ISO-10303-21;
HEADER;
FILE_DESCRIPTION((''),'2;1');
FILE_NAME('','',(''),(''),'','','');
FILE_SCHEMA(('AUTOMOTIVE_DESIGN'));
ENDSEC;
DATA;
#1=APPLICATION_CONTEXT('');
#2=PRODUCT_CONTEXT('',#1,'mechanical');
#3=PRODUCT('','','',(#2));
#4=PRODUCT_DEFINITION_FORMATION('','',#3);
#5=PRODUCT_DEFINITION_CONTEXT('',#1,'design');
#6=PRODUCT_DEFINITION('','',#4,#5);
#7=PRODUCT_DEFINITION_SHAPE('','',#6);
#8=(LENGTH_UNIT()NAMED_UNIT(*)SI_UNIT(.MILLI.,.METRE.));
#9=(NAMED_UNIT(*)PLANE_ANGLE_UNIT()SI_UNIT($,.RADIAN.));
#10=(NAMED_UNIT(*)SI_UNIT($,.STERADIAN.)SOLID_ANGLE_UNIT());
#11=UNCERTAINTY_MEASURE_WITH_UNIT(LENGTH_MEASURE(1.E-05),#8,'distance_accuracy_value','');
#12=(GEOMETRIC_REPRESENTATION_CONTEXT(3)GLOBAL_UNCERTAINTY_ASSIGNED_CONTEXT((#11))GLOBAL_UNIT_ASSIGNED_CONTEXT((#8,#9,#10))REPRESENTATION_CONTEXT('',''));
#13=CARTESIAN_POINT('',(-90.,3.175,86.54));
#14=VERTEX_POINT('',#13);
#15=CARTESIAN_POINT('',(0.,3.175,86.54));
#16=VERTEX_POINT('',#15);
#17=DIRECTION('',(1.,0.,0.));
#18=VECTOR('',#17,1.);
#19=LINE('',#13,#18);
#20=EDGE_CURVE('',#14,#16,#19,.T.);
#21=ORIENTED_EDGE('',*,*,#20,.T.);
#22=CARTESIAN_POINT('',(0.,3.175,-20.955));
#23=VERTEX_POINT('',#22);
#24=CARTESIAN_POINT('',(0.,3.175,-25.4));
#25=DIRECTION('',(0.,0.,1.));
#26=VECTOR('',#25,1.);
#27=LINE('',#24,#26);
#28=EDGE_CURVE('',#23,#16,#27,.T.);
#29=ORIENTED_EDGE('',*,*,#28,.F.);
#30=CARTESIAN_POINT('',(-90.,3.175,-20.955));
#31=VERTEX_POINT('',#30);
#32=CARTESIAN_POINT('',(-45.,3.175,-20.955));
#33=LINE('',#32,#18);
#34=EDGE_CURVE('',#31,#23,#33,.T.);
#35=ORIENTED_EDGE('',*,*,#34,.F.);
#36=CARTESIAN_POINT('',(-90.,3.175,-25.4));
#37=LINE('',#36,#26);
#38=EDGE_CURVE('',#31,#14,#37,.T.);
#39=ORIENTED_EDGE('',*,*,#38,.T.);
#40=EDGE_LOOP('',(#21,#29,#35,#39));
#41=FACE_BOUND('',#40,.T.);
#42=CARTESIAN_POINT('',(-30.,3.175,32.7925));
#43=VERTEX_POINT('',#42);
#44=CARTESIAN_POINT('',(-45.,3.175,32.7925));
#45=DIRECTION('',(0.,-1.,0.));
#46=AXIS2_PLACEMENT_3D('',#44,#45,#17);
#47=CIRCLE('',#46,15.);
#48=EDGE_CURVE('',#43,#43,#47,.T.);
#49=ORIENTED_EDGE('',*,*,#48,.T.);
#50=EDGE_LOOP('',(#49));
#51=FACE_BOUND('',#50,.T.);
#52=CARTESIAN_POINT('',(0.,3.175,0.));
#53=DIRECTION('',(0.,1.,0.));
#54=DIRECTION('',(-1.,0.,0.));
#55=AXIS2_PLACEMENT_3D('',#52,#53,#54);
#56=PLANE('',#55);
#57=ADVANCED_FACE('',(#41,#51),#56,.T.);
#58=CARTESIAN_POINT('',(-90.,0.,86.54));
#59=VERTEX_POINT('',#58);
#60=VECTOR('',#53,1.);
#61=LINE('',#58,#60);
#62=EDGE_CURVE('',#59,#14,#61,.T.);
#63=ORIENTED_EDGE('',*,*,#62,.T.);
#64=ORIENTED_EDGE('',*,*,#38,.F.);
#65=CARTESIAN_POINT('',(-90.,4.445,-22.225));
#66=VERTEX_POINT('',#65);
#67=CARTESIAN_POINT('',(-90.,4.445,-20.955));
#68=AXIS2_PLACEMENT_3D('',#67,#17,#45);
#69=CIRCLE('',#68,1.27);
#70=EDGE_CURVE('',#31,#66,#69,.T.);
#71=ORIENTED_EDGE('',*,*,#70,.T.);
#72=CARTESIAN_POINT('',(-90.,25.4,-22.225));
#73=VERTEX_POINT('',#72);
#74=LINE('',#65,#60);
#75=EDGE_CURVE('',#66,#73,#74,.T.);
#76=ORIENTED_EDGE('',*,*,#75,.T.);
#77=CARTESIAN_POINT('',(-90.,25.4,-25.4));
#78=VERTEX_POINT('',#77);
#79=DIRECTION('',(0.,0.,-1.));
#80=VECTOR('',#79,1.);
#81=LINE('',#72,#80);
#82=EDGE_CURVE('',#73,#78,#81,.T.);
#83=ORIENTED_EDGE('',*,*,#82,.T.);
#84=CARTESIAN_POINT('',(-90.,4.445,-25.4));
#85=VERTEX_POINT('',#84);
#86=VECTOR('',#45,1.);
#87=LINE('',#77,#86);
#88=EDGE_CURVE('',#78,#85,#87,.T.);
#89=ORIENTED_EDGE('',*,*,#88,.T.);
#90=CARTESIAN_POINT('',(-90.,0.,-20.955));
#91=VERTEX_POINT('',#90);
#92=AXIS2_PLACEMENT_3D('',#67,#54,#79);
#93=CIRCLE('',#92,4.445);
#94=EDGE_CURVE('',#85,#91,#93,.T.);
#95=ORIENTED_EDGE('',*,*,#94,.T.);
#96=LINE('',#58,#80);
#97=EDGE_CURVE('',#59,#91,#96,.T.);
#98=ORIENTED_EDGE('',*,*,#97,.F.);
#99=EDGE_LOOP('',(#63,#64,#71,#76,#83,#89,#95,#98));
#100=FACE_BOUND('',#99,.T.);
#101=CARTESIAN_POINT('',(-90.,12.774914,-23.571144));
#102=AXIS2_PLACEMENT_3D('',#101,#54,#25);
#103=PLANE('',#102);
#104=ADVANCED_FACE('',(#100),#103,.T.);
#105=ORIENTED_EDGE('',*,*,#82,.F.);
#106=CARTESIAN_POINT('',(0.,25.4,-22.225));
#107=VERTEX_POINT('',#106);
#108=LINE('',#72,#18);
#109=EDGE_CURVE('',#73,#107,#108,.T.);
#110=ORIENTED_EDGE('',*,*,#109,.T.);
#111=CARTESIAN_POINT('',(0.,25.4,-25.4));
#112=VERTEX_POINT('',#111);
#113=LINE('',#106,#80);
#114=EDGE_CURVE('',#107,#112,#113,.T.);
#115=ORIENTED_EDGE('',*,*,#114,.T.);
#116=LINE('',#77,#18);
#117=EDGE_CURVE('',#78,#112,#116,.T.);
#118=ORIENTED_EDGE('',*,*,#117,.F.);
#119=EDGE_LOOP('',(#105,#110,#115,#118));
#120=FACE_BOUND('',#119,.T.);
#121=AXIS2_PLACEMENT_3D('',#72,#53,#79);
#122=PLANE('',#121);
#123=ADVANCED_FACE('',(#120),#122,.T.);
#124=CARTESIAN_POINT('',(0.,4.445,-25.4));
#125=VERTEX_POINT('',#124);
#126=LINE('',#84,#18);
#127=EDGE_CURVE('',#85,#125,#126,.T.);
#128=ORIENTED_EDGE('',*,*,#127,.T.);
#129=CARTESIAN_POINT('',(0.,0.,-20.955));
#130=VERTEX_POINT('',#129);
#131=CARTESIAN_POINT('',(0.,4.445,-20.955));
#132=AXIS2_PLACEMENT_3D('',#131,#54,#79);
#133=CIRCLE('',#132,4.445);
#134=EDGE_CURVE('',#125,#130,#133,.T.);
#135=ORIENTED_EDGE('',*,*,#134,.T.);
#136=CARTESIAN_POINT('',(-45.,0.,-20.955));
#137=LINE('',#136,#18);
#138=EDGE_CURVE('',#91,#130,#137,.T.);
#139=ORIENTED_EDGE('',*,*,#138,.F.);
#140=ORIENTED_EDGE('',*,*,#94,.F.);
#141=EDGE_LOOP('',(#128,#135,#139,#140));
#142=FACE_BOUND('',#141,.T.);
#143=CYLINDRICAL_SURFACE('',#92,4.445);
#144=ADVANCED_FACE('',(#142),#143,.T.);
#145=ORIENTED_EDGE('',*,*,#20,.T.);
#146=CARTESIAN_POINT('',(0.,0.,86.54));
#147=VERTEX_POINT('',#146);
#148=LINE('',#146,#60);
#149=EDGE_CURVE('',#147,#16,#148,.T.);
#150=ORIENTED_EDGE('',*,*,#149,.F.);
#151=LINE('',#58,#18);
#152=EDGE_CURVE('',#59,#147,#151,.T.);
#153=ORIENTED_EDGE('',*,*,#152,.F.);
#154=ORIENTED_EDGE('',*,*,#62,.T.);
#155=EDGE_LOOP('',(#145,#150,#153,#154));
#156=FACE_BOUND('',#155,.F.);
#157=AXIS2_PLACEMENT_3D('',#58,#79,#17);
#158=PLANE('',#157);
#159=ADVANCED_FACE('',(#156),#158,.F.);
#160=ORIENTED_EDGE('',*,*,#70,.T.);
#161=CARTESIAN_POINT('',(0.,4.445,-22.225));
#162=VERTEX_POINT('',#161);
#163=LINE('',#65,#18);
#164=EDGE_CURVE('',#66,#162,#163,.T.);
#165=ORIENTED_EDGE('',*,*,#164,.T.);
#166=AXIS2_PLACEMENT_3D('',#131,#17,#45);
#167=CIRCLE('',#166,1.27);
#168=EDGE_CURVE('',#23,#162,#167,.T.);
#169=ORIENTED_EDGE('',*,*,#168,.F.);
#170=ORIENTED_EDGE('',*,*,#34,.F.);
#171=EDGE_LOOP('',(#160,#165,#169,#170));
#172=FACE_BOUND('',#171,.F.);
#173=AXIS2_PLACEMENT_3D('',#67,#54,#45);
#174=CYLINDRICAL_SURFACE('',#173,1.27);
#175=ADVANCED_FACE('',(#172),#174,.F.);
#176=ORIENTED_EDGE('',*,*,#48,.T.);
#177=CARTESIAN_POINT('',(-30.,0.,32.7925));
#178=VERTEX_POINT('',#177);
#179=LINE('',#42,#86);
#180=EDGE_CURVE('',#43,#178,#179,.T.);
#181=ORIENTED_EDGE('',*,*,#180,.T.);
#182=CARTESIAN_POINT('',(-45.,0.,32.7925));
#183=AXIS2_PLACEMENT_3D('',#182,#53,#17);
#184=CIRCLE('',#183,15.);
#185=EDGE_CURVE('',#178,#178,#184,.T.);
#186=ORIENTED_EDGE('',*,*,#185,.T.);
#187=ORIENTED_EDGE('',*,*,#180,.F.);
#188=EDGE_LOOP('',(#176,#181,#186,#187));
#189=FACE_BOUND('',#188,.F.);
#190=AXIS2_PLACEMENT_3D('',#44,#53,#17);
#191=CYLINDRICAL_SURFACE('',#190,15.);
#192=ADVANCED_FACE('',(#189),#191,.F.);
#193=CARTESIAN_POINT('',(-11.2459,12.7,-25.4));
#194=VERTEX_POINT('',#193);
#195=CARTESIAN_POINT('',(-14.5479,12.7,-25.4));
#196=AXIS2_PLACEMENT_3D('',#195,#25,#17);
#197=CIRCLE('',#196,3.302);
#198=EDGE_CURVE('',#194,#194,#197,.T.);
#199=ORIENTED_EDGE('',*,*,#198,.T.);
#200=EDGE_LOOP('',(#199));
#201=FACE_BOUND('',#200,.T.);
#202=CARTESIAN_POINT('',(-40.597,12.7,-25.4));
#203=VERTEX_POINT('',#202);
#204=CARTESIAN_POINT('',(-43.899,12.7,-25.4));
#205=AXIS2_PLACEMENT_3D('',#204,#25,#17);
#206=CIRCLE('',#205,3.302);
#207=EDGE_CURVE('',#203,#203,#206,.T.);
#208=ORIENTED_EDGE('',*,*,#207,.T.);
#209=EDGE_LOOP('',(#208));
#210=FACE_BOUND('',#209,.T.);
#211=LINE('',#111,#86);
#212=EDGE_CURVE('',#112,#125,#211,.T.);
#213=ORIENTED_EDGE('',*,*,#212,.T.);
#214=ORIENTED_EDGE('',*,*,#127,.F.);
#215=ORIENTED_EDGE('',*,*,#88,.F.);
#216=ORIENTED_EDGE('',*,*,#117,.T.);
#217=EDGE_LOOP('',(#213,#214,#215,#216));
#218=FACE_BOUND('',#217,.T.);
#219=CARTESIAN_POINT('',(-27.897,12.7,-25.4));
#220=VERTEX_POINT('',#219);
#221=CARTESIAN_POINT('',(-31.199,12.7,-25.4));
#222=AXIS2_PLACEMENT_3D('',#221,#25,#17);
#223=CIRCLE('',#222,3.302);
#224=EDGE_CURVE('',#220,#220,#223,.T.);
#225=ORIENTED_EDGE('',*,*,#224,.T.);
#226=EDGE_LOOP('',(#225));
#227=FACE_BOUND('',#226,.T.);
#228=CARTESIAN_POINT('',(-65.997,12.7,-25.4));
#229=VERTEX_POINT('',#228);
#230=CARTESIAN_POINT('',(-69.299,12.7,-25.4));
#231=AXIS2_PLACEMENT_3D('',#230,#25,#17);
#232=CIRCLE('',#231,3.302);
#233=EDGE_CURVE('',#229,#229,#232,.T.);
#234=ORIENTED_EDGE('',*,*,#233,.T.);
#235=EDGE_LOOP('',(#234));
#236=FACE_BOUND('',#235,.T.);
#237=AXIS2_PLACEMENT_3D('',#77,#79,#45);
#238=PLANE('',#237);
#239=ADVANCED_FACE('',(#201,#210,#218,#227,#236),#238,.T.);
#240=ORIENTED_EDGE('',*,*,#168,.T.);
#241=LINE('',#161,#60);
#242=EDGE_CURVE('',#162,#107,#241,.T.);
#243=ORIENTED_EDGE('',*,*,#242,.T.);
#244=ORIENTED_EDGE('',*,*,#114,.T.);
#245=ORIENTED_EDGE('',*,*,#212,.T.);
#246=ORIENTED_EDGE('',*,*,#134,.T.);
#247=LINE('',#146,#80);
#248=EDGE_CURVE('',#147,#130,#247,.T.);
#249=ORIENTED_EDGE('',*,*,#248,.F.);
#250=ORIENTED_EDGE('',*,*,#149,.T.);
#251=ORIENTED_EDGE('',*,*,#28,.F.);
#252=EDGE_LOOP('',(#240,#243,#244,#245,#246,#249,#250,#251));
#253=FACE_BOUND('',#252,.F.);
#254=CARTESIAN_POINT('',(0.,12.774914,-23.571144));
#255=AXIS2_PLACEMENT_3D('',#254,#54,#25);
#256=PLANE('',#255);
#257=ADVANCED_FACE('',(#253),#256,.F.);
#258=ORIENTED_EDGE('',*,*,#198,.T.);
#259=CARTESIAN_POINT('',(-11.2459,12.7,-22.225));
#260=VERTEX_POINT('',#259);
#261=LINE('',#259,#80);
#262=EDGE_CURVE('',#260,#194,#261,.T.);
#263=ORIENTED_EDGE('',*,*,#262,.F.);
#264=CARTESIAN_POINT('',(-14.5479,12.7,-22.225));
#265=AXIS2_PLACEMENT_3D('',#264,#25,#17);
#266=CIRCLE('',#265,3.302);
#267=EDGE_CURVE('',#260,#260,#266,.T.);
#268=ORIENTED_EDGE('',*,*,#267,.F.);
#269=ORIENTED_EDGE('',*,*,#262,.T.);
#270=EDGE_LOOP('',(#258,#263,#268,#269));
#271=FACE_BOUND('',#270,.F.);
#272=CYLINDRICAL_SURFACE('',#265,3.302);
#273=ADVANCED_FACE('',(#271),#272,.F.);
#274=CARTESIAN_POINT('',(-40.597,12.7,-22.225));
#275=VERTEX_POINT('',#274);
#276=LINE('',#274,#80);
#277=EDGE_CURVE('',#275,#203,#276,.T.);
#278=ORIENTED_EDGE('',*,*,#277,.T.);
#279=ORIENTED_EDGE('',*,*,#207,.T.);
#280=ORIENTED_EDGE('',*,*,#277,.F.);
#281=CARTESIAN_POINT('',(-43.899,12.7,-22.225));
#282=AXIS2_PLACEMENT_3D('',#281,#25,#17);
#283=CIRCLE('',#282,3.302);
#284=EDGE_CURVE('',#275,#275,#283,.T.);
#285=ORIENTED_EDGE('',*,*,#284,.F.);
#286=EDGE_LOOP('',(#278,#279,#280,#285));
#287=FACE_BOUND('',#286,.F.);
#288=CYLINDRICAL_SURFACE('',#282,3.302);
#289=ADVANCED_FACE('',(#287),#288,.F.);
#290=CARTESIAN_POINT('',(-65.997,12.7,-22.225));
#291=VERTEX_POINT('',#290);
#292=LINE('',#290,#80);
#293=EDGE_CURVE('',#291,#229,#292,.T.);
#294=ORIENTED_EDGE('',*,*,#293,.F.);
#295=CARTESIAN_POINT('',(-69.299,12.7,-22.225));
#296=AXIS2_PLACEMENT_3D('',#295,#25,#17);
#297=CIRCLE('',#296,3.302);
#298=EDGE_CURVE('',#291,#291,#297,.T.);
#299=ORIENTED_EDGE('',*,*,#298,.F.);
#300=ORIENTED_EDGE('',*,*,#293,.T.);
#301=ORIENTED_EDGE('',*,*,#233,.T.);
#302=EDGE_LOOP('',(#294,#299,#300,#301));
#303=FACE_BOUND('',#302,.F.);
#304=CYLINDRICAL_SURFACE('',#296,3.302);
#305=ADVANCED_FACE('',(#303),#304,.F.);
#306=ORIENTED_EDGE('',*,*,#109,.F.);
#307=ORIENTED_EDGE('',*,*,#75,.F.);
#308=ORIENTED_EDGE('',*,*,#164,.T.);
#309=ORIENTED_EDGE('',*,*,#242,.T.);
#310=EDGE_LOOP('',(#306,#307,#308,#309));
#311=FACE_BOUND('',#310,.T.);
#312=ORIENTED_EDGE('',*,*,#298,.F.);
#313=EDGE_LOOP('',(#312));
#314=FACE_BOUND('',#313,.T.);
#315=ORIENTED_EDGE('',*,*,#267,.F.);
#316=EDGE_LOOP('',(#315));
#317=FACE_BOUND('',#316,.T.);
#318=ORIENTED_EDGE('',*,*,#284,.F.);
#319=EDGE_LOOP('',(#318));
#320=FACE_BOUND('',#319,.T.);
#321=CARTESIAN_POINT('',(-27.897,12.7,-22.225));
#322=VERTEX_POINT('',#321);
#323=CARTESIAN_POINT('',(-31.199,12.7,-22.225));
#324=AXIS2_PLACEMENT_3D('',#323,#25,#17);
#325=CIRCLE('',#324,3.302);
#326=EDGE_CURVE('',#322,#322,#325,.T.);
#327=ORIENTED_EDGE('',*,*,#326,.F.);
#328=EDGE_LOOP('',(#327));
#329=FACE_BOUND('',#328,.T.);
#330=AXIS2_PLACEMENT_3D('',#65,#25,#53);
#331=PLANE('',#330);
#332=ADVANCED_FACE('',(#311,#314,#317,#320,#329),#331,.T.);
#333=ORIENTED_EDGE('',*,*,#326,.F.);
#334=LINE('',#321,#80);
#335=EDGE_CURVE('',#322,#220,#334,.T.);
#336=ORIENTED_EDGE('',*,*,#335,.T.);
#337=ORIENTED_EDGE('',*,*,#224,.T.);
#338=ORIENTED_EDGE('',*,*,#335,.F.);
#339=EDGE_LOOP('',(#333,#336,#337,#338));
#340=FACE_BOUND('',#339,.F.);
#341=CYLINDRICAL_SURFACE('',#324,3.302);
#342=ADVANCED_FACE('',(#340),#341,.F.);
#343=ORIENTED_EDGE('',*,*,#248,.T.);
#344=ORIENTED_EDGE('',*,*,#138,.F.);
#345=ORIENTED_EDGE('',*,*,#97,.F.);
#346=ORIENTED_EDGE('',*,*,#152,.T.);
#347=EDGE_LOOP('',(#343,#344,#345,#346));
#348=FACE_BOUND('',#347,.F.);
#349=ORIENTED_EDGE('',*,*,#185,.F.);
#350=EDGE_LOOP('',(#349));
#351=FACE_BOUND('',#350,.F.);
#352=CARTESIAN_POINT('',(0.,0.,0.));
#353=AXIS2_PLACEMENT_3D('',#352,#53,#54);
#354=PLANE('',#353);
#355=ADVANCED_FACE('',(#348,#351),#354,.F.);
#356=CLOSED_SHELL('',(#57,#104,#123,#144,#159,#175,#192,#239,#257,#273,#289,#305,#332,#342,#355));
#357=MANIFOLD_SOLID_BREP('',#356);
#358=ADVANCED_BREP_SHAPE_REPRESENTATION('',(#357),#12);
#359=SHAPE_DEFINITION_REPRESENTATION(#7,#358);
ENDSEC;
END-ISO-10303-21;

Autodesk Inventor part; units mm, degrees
ref_plane "YZ Plane" through (0, 0, 0) normal (1, 0, 0) x (0, 1, 0)
ref_plane "XZ Plane" through (0, 0, 0) normal (0, 1, 0) x (-1, 0, 0)
ref_plane "XY Plane" through (0, 0, 0) normal (0, 0, 1) x (1, 0, 0)
sketch "Sketch3" plane through (0, 0, 0) normal (0, 1, 0) x (-1, 0, 0)
  line L0 (0, 0) -> (90, 0)
  line L1 (90, 0) -> (90, 86.54)
  line L2 (90, 86.54) -> (0, 86.54)
  line L3 (0, 86.54) -> (0, 0)
  line L4 (0, 0) -> (0, -25.4)
  line L5 (0, -25.4) -> (90, -25.4)
  line L6 (90, -25.4) -> (90, 0)
  dimension "d13" = 90
  dimension "d14" = 86.54
  dimension "d15" = 25.4
extrude "Plate3" add sketch "Sketch3" along normal blind 3.175
sketch "Sketch4" plane through (-90, 0, -22.225) normal (0, 0, -1) x (-1, 0, 0)
  line L0 (-90, 0) -> (0, 0)
  line L1 (0, 0) -> (0, 25.4)
  line L2 (0, 25.4) -> (-90, 25.4)
  line L3 (-90, 25.4) -> (-90, 0)
edge flange "Flange2" height 25.4 angle 90 thickness 3.175 bend radius 1.27 thickness toward (0, 0, -1) relief tear relief width 3.175 relief depth 1.5875 edges at (-45, 3.175, -25.4) wall of the first edge with corners at (0, 0, -22.225) (-90, 0, -22.225) (-90, 25.4, -22.225) (0, 25.4, -22.225)
bend "Bend2"
corner "Corner2"
sketch "Sketch5" plane through (0, 3.175, 0) normal (0, 1, 0) x (1, 0, 0)
  line L0 (0, 20.955) -> (-90, 20.955) projected
  line L1 (-90, -86.54) -> (-90, 20.955) projected
  line L2 (0, -86.54) -> (-90, -86.54) projected
  line L3 (0, 20.955) -> (0, -86.54) projected
  line L4 (-45, 20.955) -> (-45, -86.54)
  line L5 (0, -32.7925) -> (-90, -32.7925)
  circle A0 centre (-45, -32.7925) radius 15
  point P0 (0, 0)
  dimension "d27" = 30
extrude "Cut1" cut sketch "Sketch5" against normal blind 3.175 contours A0 L5 L4 | L4 L5 A0 | A0 L4 L5 | L4 A0 L5
sketch "Sketch6" plane through (-90, 25.4, -22.225) normal (0, 0, 1) x (1, 0, 0)
  circle A0 centre (20.701, -12.7) radius 3.302 projected
  circle A1 centre (58.801, -12.7) radius 3.302 projected
  circle A2 centre (46.101, -12.7) radius 3.302 projected
  circle A3 centre (1.651, -12.7) radius 3.302 projected
  circle A4 centre (119.9021, -12.7) radius 3.302 projected
  circle A5 centre (75.4521, -12.7) radius 3.302 projected
  point P0 (90, -25.4)
extrude "Cut2" cut sketch "Sketch6" against normal blind 3.175 contours A0 | A1 | A2 | A5
equation "\"d28\" = Thickness"
equation "\"d30\" = Thickness"
equation "\"d17\" = BendReliefWidth"
equation "\"d18\" = BendReliefDepth"
equation "\"d19\" = MinimumRemnant"
equation "\"d20\" = BendRadius"
equation "\"d24\" = CornerReliefSize"
equation "\"d25\" = GapSize"
equation "\"d26\" = JacobiRadiusSize"
equation "\"BendRadius\" = Thickness"
equation "\"BendReliefWidth\" = Thickness"
equation "\"BendReliefDepth\" = 0.5 * Thickness"
equation "\"CornerReliefSize\" = 4 * Thickness"
equation "\"MinimumRemnant\" = 2 * Thickness"
equation "\"TransitionRadius\" = BendRadius"
equation "\"JacobiRadiusSize\" = BendRadius"
equation "\"GapSize\" = Thickness"
equation "\"d2\" = BendRadius"
equation "\"d16\" = BendRadius"
equation "\"Thickness\" = 3.175"
properties part number "New Bracket for arm motor"
